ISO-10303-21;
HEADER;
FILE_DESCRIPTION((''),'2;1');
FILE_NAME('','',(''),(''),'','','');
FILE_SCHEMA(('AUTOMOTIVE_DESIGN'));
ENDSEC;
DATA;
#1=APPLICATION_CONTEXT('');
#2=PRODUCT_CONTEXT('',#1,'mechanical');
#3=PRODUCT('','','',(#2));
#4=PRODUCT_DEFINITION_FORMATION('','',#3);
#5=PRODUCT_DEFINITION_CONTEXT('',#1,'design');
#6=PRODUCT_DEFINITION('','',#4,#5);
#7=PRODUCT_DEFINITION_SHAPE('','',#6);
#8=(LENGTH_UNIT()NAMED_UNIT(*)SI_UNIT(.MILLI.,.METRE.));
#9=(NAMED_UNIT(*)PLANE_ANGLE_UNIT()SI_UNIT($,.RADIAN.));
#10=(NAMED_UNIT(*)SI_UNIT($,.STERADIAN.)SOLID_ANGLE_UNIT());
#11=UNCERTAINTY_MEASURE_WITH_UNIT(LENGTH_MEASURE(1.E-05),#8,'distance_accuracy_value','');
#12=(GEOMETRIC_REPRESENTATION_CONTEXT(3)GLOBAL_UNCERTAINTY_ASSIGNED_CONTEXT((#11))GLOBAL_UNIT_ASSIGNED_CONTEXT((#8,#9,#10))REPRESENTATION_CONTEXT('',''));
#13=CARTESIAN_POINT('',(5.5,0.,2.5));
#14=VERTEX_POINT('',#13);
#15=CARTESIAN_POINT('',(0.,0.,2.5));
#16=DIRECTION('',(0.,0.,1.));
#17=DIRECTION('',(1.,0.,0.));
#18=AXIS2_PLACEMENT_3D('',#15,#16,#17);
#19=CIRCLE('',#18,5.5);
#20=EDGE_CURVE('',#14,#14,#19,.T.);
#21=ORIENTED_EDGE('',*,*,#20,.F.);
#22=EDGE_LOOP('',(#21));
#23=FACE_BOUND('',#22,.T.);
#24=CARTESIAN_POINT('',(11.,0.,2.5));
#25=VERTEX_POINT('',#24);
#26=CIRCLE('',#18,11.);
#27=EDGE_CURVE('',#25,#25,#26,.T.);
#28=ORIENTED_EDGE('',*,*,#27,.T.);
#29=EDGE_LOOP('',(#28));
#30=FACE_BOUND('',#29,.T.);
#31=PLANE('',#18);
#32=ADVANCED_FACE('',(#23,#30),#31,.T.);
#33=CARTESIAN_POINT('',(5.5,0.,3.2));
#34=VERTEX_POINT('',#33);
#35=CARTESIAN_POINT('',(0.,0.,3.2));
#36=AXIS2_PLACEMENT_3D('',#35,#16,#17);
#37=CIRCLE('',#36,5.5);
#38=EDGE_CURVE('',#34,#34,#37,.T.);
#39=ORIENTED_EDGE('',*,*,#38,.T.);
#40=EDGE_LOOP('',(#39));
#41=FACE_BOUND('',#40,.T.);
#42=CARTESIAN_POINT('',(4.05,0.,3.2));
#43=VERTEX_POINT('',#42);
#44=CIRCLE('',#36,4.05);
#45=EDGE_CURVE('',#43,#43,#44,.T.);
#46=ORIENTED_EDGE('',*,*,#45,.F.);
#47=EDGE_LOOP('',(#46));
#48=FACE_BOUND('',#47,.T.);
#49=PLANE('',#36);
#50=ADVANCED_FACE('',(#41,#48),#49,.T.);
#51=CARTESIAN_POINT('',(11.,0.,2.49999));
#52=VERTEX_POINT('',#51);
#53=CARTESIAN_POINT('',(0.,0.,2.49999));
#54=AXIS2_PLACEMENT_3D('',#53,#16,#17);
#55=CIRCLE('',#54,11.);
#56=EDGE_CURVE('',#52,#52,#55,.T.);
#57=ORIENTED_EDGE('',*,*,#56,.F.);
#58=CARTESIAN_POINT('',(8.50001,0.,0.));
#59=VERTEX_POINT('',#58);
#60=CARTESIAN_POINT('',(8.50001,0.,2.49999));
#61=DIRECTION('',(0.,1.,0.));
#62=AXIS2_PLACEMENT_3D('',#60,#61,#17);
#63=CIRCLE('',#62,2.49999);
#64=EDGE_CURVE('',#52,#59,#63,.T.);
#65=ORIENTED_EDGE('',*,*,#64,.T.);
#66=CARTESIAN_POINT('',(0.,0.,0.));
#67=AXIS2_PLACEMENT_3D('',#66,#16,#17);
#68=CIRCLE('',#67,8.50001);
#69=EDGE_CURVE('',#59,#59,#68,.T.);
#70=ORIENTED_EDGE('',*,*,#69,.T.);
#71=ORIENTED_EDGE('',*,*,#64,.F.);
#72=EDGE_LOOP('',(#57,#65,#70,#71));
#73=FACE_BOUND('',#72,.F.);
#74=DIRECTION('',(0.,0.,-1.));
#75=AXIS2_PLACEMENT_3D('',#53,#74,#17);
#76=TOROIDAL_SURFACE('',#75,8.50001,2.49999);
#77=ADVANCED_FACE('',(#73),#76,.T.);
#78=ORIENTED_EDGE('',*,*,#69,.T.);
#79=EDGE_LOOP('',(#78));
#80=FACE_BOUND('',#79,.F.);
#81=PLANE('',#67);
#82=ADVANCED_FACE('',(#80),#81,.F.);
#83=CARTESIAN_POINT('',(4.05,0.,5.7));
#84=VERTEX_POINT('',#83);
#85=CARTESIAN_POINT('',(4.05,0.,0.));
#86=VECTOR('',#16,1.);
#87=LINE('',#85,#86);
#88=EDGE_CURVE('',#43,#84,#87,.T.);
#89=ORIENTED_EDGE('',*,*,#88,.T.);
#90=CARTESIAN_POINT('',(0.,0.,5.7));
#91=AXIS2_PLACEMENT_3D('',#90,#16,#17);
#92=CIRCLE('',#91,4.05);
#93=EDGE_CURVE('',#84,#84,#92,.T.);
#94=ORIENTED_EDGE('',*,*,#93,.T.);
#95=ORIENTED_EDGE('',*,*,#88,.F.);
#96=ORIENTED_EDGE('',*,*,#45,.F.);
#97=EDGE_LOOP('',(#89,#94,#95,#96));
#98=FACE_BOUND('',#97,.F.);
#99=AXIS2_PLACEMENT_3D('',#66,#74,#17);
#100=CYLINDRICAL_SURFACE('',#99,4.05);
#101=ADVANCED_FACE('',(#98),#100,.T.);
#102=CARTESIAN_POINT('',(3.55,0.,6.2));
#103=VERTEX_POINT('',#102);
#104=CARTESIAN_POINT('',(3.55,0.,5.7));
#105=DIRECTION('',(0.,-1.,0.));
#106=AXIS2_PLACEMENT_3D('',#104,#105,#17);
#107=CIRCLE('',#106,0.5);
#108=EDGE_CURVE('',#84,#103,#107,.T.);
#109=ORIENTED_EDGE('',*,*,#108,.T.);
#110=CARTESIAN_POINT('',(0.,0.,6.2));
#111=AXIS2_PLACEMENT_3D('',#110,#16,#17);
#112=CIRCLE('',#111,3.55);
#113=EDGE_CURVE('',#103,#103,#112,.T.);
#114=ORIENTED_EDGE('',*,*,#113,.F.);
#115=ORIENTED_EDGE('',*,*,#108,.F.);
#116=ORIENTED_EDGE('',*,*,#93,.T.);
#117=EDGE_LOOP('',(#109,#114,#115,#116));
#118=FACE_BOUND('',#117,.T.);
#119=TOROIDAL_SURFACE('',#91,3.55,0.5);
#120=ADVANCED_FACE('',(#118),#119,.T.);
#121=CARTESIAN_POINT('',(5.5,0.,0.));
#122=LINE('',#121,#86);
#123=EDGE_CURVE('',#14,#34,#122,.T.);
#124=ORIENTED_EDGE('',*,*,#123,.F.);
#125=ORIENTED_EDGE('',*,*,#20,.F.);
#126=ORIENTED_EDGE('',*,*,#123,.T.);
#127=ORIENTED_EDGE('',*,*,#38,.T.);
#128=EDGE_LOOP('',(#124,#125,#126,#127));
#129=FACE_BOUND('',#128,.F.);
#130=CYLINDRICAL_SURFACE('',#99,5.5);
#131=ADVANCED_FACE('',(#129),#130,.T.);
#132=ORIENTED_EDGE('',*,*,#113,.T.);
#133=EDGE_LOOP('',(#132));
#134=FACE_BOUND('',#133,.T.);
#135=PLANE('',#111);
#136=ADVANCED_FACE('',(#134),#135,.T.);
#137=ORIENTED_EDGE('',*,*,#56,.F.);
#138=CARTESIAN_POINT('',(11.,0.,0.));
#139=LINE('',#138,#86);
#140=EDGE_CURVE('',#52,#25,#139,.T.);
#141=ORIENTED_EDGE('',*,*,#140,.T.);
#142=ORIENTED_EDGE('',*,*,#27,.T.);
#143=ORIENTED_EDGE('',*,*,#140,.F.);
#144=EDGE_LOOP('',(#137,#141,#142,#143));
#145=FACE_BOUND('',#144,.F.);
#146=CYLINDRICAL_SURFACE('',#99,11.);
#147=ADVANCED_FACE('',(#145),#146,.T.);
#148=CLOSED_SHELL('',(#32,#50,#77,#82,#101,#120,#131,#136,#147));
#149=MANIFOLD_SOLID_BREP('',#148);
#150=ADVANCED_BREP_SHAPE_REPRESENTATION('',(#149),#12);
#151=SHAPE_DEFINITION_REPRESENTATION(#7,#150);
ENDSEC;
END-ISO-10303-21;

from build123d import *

# Parameters (mm, degrees)
F0_R     = 11
F0_R_2   = 5.5
F1_DEPTH = 2.5
F0_R_3   = 4.05
F2_DEPTH = 3.2
F3_DEPTH = 6.2
F4_R     = 2.49999
F5_R     = 0.5


# Not quite as in the source:
# - a fillet or chamfer is up to 0.001 mm smaller than in the source, because OpenCascade refuses the exact size


with BuildPart() as f1:
    # F0 (on Top) → F1 (new body)
    with BuildSketch(Plane.XY):
        Circle(F0_R)
        Circle(F0_R_2, mode=Mode.SUBTRACT)
    extrude(amount=F1_DEPTH)

    # F0 (on Top) → F2 (join)
    with BuildSketch(Plane.XY):
        Circle(F0_R_2)
        Circle(F0_R_3, mode=Mode.SUBTRACT)
    extrude(amount=F2_DEPTH)

    # F0 (on Top) → F3 (join)
    with BuildSketch(Plane.XY):
        Circle(F0_R_3)
    extrude(amount=F3_DEPTH)

    # F4 (radius 2.5 in the source; OpenCascade refuses exactly that, so slightly less here)
    f4_edges = [f1.edges().sort_by_distance(p)[0] for p in [
        (-11, 0, 0),
    ]]
    fillet(f4_edges, radius=F4_R)

    # F5
    f5_edges = [f1.edges().sort_by_distance(p)[0] for p in [
        (-4.05, 0, 6.2),
    ]]
    fillet(f5_edges, radius=F5_R)


solid = f1.part
